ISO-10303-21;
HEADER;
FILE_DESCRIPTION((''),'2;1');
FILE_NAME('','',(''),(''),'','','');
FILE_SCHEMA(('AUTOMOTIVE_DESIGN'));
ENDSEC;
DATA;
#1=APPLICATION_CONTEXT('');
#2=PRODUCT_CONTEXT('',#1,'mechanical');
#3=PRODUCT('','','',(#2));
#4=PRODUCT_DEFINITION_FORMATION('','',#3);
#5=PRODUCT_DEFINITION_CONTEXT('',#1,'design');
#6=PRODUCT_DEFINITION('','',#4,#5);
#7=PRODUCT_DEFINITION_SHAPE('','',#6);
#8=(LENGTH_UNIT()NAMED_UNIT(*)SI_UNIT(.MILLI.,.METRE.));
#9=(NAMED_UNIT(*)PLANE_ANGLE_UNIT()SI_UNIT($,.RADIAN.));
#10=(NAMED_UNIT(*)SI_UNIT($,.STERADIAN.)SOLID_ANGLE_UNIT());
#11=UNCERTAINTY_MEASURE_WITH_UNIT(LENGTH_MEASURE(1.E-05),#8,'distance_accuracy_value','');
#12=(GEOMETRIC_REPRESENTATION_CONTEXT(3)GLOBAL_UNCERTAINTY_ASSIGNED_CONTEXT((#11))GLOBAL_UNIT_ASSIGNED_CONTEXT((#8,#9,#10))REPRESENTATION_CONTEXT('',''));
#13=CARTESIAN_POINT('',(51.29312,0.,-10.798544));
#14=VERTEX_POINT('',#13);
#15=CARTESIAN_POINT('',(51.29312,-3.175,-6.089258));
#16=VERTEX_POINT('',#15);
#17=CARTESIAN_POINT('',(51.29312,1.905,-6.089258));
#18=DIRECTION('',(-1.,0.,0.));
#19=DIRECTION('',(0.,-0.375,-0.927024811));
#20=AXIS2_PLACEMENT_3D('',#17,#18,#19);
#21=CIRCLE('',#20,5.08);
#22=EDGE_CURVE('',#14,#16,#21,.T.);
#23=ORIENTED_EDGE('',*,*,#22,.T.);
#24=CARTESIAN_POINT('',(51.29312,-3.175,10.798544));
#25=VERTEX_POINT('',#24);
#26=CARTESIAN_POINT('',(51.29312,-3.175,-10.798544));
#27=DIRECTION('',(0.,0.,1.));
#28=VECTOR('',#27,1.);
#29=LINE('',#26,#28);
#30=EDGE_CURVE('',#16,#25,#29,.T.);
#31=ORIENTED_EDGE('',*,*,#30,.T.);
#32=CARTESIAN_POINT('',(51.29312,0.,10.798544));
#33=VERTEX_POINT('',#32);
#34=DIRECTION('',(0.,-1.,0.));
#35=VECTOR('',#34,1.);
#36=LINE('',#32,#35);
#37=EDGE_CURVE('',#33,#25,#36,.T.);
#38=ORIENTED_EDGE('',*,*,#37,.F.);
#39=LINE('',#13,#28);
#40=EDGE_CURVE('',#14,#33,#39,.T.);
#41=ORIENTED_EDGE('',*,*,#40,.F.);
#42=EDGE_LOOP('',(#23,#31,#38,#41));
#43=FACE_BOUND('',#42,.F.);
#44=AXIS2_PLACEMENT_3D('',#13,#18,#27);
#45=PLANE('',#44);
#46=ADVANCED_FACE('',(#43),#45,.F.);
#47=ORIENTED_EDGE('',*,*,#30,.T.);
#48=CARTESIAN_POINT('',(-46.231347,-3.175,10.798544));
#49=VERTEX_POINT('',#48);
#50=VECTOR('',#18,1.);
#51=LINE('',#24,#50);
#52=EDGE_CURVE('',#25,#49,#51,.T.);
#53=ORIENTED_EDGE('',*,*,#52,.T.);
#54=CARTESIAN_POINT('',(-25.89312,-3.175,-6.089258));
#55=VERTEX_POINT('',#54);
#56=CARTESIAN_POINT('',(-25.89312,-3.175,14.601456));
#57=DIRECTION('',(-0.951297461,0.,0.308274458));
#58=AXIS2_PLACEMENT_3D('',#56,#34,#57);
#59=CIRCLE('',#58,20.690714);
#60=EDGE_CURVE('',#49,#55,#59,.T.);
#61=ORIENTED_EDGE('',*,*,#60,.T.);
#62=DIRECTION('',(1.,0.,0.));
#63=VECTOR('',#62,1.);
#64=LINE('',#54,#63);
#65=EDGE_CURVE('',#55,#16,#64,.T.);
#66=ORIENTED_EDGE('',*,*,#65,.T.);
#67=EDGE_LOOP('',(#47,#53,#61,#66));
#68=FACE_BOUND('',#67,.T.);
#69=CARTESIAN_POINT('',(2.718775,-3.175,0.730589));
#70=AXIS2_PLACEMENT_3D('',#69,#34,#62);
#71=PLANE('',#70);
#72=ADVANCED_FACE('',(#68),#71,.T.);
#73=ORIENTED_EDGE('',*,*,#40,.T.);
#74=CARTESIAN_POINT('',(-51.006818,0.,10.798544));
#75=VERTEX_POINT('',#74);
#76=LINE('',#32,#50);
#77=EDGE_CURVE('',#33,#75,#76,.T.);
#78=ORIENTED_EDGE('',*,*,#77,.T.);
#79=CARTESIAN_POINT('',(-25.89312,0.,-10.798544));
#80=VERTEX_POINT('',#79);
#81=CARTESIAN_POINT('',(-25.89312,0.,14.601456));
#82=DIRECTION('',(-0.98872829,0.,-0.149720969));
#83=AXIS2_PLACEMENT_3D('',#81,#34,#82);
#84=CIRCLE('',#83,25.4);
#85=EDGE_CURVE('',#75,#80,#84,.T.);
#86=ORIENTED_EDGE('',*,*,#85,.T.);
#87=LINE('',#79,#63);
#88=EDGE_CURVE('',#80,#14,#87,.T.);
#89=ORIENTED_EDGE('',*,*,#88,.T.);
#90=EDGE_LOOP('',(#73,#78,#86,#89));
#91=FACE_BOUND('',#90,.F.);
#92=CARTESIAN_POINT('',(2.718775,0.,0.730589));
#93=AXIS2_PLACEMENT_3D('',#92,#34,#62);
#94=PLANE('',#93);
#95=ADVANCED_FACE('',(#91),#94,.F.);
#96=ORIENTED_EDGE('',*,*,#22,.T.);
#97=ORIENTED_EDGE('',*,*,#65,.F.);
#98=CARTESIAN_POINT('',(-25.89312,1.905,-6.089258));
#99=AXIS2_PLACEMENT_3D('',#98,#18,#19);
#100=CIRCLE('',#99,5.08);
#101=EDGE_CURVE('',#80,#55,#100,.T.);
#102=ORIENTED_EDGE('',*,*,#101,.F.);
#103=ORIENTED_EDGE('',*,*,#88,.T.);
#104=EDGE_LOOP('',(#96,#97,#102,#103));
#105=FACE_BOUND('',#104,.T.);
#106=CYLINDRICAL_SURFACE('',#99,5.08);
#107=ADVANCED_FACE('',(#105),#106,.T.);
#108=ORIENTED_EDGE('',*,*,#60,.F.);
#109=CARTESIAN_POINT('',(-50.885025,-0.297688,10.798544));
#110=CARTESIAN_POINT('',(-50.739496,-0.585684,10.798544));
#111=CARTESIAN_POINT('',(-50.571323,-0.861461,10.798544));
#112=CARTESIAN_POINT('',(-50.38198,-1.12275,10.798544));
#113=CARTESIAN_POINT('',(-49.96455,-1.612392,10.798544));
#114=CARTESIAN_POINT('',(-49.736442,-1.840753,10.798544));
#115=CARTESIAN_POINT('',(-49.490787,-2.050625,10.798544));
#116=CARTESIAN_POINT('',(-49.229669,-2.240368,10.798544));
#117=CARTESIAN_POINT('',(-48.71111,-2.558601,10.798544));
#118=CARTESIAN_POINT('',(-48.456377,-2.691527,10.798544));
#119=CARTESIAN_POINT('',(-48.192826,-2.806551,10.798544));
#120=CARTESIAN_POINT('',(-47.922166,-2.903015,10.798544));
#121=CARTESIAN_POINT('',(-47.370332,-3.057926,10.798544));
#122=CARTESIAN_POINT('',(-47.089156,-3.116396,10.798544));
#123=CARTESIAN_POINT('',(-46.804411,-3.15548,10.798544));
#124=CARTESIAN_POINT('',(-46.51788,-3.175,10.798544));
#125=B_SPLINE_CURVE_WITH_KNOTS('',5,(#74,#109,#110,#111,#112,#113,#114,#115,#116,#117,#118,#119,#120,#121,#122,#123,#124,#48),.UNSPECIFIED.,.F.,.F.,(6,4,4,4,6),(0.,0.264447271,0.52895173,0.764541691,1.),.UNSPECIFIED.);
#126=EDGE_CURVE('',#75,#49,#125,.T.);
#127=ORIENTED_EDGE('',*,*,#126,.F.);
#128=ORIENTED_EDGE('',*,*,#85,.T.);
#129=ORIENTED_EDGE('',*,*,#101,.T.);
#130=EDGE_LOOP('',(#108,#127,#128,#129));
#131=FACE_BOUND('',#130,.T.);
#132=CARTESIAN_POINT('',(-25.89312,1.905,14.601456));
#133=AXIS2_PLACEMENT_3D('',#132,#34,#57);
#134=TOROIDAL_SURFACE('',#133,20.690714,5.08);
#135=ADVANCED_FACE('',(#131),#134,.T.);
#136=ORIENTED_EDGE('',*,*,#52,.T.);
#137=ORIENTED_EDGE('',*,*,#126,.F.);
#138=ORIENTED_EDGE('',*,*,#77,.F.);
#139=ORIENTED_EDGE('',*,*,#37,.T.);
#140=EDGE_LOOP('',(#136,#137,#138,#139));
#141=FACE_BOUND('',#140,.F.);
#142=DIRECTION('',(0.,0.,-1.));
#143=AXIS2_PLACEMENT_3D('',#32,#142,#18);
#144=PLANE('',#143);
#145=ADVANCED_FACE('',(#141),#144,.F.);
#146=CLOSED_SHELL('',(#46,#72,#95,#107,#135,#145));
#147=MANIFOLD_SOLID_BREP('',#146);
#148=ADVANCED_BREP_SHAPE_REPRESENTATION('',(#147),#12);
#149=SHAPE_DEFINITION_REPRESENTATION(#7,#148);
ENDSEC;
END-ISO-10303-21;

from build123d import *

# Parameters (mm, degrees)
F1_DEPTH    = 3.175
F2_T1_DEPTH = 88.9594546746
F2_T4_ANGLE = 107.955272034


# Not quite as in the source:
# - a fillet or chamfer that OpenCascade refuses, or shapes differently, is made with other operations: its cross-section is extruded or revolved along the edge and cut away or added


with BuildPart() as f1:
    # F0 (on Front) → F1 (new body)
    with BuildSketch(Plane.XZ):
        with BuildLine():
            Line((-25.8931197882, -10.7985436916), (51.2931197882, -10.7985436916))
            Line((51.2931197882, -10.7985436916), (51.2931197882, 10.7985436916))
            Line((51.2931197882, 10.7985436916), (-51.0068183535, 10.7985436916))
            ThreePointArc((-51.0068183535, 10.7985436916), (-42.4546115618, -4.6567105367), (-25.8931197882, -10.7985436916))
        make_face()
    extrude(amount=F1_DEPTH)

    # F2: fillet of radius 5.08 on 1 edges, made by hand

    # F2_s2 → F2_t1 (cut)
    with BuildSketch(Plane.YZ.offset(-25.8931197882)):
        with BuildLine():
            ThreePointArc((0, -10.7985436916), (-2.3071134838, -8.9290639838), (-3.175, -6.0892576523))
            Line((-3.175, -6.0892576523), (-3.175, -10.7985436916))
            Line((-3.175, -10.7985436916), (0, -10.7985436916))
        make_face()
    extrude(amount=F2_T1_DEPTH, mode=Mode.SUBTRACT)

    # F2_s3 → F2_t4 (revolve, cut)
    with BuildSketch(Plane(origin=(1.8213289156, 0, 5.6203993841), x_dir=(0, 1, 0), z_dir=(0.3082744578, 0, 0.9512974607))):
        with BuildLine():
            ThreePointArc((0, 54.5333151295), (-2.3071134838, 52.6638354216), (-3.175, 49.8240290902))
            Line((-3.175, 49.8240290902), (-3.175, 54.5333151295))
            Line((-3.175, 54.5333151295), (0, 54.5333151295))
        make_face()
    revolve(axis=Axis((-25.8931197882, -3.175, 14.6014563084), (0, -1, 0)), revolution_arc=F2_T4_ANGLE, mode=Mode.SUBTRACT)


solid = f1.part
